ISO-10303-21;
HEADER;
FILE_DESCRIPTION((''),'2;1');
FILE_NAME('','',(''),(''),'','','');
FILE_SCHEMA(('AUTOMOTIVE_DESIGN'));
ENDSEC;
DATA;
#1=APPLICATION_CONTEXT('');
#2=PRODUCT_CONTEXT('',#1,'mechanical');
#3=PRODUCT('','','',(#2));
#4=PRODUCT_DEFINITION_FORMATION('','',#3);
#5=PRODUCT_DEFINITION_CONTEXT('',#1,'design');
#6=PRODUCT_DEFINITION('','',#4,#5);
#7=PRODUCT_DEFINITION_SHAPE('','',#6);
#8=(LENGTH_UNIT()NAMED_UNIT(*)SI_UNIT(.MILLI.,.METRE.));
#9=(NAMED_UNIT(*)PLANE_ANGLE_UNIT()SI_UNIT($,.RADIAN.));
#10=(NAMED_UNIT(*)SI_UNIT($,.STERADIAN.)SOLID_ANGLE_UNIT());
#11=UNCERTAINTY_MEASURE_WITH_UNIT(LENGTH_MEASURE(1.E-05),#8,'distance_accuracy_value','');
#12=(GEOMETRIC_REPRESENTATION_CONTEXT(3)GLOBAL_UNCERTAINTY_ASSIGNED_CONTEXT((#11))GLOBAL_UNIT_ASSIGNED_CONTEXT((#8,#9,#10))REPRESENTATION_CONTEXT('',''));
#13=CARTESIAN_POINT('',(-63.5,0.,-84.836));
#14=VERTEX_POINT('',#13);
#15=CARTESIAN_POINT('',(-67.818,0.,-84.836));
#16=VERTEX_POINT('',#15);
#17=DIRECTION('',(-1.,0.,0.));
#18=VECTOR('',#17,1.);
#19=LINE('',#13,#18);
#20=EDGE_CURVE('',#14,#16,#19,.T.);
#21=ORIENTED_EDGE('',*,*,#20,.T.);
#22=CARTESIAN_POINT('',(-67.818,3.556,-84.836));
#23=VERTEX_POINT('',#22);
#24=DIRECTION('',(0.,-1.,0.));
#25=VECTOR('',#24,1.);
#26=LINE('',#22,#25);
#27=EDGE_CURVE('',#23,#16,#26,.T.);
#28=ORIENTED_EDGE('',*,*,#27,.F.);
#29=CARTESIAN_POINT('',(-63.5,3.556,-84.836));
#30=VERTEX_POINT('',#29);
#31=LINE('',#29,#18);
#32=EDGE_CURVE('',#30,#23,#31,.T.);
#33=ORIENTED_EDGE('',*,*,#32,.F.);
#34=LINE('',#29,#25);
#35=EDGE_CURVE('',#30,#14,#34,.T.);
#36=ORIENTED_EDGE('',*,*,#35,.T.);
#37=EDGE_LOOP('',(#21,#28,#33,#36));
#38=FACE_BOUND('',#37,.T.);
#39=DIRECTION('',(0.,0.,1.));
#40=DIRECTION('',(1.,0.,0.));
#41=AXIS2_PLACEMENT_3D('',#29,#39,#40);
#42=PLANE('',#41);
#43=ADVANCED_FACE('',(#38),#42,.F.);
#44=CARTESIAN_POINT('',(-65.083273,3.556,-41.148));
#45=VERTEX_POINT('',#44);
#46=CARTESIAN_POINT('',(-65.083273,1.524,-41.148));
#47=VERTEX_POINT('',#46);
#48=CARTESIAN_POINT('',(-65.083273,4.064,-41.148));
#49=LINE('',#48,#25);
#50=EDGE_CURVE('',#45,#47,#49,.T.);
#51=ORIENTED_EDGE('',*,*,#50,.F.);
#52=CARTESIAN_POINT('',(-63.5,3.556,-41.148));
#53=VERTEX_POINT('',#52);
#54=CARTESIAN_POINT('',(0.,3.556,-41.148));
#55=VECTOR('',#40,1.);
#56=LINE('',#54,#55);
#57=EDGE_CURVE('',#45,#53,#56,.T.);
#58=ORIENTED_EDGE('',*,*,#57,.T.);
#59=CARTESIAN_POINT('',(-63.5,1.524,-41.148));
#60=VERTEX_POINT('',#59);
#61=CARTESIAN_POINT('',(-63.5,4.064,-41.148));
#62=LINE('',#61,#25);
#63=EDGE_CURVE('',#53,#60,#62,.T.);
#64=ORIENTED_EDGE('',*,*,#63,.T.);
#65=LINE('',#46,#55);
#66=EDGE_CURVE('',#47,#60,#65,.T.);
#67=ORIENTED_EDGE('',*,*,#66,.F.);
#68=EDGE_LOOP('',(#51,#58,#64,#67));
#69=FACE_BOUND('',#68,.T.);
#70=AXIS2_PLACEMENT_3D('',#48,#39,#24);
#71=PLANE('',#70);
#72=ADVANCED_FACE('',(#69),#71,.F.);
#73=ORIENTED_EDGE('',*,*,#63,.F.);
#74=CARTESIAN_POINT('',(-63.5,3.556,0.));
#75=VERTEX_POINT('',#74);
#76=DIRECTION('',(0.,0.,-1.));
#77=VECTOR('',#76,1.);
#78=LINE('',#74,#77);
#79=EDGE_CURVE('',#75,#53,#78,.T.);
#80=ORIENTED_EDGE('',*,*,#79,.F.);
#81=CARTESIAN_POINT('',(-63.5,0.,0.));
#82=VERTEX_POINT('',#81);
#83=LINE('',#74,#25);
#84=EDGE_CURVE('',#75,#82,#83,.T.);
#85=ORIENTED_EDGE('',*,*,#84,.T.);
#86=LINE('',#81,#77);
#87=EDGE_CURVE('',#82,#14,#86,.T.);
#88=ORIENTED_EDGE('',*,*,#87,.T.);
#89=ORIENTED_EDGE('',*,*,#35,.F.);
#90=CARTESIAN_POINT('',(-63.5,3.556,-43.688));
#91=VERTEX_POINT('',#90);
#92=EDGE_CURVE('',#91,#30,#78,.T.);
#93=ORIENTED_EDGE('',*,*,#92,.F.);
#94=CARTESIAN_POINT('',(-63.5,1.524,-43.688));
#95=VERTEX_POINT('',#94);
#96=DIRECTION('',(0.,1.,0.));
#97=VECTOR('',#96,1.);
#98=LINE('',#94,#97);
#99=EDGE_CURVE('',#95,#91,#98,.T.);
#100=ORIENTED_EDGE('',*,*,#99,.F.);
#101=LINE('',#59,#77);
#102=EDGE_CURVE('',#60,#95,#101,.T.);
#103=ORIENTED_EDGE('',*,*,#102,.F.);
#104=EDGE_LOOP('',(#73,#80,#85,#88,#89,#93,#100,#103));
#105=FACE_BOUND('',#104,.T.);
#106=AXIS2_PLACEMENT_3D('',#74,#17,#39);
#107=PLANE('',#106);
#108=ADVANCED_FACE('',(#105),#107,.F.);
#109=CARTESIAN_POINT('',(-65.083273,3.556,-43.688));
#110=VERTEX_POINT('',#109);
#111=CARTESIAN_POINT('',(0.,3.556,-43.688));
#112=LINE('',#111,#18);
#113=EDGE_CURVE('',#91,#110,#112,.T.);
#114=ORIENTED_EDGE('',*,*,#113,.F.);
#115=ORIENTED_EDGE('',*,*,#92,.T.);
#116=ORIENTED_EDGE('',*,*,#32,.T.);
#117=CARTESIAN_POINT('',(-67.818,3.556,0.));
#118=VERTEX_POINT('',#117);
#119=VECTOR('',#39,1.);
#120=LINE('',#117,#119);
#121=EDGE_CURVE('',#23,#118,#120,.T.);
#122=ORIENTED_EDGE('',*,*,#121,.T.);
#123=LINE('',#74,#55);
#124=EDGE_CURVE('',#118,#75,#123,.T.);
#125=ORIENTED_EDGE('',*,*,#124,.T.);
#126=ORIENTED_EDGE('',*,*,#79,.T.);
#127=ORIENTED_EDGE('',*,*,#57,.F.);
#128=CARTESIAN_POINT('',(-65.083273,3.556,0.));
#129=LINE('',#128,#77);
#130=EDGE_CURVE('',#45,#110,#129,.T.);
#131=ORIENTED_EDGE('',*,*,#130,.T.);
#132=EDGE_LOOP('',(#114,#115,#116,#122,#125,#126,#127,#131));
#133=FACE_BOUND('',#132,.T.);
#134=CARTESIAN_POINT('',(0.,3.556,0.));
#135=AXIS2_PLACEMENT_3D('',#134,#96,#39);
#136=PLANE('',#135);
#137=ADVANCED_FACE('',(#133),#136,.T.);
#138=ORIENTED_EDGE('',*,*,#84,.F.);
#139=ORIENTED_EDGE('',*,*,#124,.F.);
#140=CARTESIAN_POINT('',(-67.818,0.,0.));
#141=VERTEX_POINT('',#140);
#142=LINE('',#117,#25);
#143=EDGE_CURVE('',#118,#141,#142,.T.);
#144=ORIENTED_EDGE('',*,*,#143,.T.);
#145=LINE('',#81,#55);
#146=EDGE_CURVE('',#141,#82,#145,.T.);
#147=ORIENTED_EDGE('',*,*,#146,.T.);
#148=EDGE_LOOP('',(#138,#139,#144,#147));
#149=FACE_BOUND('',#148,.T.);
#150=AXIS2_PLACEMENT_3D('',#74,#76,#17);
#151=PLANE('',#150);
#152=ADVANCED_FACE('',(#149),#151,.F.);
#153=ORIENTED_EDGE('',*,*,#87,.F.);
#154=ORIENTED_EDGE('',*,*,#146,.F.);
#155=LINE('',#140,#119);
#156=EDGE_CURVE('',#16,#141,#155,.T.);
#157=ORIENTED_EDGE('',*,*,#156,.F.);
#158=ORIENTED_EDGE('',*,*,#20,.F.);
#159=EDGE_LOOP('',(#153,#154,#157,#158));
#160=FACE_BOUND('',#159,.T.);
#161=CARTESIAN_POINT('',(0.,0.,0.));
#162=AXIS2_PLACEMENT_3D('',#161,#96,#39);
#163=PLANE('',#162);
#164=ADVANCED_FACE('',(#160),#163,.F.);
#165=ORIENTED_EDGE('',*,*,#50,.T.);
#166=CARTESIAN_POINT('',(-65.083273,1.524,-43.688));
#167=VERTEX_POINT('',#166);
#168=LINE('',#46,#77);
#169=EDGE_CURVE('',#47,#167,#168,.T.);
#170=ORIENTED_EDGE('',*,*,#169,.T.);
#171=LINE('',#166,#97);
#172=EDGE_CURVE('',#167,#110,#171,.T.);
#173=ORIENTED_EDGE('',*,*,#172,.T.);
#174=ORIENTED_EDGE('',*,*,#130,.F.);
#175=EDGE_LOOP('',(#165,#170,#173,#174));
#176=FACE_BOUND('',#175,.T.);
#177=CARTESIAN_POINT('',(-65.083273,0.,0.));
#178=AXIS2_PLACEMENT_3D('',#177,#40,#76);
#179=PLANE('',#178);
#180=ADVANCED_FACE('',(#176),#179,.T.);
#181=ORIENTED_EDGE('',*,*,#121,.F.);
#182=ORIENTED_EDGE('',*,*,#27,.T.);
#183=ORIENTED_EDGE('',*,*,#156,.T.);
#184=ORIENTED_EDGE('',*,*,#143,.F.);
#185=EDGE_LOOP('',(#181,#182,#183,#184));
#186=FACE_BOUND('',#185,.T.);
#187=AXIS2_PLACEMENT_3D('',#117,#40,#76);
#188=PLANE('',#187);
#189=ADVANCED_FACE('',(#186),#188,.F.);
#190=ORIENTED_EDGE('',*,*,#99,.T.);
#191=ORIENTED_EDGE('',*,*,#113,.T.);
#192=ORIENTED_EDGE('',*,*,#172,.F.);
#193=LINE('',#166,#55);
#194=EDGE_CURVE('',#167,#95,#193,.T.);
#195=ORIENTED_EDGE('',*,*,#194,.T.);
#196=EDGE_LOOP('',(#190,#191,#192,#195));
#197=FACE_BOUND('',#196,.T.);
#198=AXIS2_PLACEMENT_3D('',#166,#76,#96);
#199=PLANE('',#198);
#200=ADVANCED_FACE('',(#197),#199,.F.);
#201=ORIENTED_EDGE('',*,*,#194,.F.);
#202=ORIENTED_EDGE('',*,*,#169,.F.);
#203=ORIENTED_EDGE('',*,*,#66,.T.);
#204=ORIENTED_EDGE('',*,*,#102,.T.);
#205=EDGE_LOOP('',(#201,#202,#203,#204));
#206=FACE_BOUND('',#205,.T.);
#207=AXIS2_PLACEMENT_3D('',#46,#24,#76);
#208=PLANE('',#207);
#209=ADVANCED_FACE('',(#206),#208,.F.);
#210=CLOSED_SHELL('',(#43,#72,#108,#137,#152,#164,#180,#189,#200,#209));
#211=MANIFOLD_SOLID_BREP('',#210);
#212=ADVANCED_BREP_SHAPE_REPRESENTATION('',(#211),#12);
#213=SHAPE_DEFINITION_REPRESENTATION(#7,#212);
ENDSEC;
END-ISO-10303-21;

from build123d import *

# Parameters (mm, degrees)
SKETCH1_W              = 4.318
SKETCH1_H              = 84.836
BOSS_EXTRUDE1_DEPTH    = 3.556
CUT_EXTRUDE2_START     = -1.583272769
CUT_EXTRUDE2_OUTLINE_W = 2.54
CUT_EXTRUDE2_OUTLINE_H = 2.032
CUT_EXTRUDE2_DEPTH     = 1.583272769


# Read off the part's stored shape, not the designer's step: Cut-Extrude2
with BuildPart() as part:
    # Sketch1 → Boss-Extrude1 (new body)
    with BuildSketch(Plane(origin=(0, 0, 0), x_dir=(1, 0, 0), z_dir=(0, 1, 0))):
        with Locations((-65.659, 42.418)):
            Rectangle(SKETCH1_W, SKETCH1_H)
    extrude(amount=BOSS_EXTRUDE1_DEPTH)

    # Cut-Extrude2 outline → Cut-Extrude2 (cut)
    with BuildSketch(Plane(origin=(-63.5, 0, 0), x_dir=(0, 0, -1), z_dir=(1, 0, 0)).offset(CUT_EXTRUDE2_START)):
        with Locations((42.418, 2.54)):
            Rectangle(CUT_EXTRUDE2_OUTLINE_W, CUT_EXTRUDE2_OUTLINE_H)
    extrude(amount=CUT_EXTRUDE2_DEPTH, mode=Mode.SUBTRACT)


solid = part.part
